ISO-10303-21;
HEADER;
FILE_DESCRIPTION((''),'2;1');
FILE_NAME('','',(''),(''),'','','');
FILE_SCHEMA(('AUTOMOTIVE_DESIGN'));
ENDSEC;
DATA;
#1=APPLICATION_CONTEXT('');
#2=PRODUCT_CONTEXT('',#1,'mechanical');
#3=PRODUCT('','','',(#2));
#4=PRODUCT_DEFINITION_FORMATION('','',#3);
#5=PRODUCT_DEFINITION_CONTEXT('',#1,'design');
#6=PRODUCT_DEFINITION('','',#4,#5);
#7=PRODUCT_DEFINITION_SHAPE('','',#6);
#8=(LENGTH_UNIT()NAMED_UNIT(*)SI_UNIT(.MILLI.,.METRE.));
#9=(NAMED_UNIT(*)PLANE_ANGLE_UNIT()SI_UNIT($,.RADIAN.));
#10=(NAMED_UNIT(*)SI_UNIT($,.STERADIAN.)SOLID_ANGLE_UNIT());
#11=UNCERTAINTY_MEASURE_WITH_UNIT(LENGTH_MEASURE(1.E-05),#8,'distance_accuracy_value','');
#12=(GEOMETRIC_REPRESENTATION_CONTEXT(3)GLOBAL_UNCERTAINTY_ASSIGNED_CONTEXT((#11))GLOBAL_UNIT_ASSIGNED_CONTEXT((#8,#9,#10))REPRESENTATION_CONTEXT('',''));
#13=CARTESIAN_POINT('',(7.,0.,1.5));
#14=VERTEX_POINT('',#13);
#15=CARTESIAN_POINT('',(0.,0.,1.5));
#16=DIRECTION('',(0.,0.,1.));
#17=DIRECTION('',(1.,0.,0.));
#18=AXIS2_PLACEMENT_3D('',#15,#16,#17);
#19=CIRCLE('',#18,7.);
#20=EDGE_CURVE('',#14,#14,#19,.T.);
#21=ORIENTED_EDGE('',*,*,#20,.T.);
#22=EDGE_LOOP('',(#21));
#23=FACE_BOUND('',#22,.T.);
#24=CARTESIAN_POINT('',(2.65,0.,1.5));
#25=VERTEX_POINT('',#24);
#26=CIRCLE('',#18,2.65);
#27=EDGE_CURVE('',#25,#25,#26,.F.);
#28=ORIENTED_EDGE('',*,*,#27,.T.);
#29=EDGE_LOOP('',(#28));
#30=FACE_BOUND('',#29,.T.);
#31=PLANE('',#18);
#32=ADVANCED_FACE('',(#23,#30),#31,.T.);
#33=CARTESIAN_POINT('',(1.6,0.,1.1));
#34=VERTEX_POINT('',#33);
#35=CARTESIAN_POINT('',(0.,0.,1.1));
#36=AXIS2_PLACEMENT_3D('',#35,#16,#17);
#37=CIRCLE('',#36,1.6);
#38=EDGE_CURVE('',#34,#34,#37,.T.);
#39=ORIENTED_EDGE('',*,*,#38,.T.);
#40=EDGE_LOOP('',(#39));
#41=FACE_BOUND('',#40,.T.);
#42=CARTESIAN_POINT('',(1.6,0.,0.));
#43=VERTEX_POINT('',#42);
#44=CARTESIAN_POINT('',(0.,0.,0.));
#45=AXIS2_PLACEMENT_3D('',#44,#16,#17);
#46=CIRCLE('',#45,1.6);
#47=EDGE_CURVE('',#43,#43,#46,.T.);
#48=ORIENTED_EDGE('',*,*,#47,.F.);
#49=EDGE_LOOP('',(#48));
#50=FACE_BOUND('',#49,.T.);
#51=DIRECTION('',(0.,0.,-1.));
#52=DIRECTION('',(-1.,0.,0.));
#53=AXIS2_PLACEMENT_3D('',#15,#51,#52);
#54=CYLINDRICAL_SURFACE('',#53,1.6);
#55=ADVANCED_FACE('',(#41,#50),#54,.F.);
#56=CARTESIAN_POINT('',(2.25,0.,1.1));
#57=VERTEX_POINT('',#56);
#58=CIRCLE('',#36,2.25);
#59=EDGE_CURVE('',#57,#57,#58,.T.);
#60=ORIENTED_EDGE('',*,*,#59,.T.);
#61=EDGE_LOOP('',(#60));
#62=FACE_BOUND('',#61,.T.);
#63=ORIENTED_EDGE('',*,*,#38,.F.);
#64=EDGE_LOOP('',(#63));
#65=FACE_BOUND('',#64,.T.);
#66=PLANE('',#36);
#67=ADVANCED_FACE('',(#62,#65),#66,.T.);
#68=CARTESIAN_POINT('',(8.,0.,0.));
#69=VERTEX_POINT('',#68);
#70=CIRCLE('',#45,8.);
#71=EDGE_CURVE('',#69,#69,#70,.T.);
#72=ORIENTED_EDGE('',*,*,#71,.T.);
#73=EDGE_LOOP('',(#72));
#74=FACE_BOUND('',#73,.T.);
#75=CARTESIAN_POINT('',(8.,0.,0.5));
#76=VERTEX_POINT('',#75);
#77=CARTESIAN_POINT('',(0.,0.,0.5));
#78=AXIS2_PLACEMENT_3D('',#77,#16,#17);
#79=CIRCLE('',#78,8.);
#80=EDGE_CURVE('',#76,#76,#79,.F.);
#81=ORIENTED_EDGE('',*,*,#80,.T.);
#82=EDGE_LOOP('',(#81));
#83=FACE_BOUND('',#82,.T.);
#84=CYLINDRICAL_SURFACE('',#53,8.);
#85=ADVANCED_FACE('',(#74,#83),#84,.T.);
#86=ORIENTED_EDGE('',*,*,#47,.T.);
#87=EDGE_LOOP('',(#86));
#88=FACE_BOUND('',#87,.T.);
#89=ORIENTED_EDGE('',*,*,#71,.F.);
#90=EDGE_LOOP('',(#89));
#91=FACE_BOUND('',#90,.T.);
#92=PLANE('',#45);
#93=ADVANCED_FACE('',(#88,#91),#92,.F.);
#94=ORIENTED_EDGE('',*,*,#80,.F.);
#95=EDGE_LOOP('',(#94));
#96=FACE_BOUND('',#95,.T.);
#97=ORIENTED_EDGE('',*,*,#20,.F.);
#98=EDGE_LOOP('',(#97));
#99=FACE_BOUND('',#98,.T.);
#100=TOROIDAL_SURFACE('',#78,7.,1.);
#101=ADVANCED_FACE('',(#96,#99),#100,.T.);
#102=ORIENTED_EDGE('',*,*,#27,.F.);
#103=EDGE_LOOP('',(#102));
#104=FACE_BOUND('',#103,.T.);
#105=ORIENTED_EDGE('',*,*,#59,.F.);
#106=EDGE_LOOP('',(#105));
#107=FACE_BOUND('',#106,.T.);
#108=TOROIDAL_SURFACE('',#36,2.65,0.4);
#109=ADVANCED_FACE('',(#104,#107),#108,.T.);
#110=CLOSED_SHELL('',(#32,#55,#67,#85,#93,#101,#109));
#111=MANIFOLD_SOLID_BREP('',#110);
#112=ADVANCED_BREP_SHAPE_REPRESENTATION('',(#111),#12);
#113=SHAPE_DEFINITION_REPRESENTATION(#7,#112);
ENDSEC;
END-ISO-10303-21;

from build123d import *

# Parameters (mm, degrees)
SKETCH_1_R          = 8
SKETCH_1_R_2        = 1.6
EXTRUDE_1_DEPTH     = 1.5
FILLET_1_R          = 1
SKETCH_3_R          = 2.25
CUT_EXTRUDE_3_DEPTH = 0.4
FILLET_2_R          = 0.4


with BuildPart() as part:
    # Эскиз1 → Бобышка-Вытянуть1 (new body)
    with BuildSketch(Plane.XY):
        Circle(SKETCH_1_R)
        Circle(SKETCH_1_R_2, mode=Mode.SUBTRACT)
    extrude(amount=EXTRUDE_1_DEPTH)

    # Скругление1
    fillet_1_edges = [part.edges().sort_by_distance(p)[0] for p in [
        (-8, 0, 1.5),
    ]]
    fillet(fillet_1_edges, radius=FILLET_1_R)

    # Эскиз3 → Вырез-Вытянуть3 (cut)
    with BuildSketch(Plane.XY.offset(1.5)):
        Circle(SKETCH_3_R)
    extrude(amount=-CUT_EXTRUDE_3_DEPTH, mode=Mode.SUBTRACT)

    # Скругление2
    fillet_2_edges = [part.edges().sort_by_distance(p)[0] for p in [
        (-2.25, 0, 1.5),
    ]]
    fillet(fillet_2_edges, radius=FILLET_2_R - 0.0001)  # a hair under: the kernel refuses the full size


solid = part.part
